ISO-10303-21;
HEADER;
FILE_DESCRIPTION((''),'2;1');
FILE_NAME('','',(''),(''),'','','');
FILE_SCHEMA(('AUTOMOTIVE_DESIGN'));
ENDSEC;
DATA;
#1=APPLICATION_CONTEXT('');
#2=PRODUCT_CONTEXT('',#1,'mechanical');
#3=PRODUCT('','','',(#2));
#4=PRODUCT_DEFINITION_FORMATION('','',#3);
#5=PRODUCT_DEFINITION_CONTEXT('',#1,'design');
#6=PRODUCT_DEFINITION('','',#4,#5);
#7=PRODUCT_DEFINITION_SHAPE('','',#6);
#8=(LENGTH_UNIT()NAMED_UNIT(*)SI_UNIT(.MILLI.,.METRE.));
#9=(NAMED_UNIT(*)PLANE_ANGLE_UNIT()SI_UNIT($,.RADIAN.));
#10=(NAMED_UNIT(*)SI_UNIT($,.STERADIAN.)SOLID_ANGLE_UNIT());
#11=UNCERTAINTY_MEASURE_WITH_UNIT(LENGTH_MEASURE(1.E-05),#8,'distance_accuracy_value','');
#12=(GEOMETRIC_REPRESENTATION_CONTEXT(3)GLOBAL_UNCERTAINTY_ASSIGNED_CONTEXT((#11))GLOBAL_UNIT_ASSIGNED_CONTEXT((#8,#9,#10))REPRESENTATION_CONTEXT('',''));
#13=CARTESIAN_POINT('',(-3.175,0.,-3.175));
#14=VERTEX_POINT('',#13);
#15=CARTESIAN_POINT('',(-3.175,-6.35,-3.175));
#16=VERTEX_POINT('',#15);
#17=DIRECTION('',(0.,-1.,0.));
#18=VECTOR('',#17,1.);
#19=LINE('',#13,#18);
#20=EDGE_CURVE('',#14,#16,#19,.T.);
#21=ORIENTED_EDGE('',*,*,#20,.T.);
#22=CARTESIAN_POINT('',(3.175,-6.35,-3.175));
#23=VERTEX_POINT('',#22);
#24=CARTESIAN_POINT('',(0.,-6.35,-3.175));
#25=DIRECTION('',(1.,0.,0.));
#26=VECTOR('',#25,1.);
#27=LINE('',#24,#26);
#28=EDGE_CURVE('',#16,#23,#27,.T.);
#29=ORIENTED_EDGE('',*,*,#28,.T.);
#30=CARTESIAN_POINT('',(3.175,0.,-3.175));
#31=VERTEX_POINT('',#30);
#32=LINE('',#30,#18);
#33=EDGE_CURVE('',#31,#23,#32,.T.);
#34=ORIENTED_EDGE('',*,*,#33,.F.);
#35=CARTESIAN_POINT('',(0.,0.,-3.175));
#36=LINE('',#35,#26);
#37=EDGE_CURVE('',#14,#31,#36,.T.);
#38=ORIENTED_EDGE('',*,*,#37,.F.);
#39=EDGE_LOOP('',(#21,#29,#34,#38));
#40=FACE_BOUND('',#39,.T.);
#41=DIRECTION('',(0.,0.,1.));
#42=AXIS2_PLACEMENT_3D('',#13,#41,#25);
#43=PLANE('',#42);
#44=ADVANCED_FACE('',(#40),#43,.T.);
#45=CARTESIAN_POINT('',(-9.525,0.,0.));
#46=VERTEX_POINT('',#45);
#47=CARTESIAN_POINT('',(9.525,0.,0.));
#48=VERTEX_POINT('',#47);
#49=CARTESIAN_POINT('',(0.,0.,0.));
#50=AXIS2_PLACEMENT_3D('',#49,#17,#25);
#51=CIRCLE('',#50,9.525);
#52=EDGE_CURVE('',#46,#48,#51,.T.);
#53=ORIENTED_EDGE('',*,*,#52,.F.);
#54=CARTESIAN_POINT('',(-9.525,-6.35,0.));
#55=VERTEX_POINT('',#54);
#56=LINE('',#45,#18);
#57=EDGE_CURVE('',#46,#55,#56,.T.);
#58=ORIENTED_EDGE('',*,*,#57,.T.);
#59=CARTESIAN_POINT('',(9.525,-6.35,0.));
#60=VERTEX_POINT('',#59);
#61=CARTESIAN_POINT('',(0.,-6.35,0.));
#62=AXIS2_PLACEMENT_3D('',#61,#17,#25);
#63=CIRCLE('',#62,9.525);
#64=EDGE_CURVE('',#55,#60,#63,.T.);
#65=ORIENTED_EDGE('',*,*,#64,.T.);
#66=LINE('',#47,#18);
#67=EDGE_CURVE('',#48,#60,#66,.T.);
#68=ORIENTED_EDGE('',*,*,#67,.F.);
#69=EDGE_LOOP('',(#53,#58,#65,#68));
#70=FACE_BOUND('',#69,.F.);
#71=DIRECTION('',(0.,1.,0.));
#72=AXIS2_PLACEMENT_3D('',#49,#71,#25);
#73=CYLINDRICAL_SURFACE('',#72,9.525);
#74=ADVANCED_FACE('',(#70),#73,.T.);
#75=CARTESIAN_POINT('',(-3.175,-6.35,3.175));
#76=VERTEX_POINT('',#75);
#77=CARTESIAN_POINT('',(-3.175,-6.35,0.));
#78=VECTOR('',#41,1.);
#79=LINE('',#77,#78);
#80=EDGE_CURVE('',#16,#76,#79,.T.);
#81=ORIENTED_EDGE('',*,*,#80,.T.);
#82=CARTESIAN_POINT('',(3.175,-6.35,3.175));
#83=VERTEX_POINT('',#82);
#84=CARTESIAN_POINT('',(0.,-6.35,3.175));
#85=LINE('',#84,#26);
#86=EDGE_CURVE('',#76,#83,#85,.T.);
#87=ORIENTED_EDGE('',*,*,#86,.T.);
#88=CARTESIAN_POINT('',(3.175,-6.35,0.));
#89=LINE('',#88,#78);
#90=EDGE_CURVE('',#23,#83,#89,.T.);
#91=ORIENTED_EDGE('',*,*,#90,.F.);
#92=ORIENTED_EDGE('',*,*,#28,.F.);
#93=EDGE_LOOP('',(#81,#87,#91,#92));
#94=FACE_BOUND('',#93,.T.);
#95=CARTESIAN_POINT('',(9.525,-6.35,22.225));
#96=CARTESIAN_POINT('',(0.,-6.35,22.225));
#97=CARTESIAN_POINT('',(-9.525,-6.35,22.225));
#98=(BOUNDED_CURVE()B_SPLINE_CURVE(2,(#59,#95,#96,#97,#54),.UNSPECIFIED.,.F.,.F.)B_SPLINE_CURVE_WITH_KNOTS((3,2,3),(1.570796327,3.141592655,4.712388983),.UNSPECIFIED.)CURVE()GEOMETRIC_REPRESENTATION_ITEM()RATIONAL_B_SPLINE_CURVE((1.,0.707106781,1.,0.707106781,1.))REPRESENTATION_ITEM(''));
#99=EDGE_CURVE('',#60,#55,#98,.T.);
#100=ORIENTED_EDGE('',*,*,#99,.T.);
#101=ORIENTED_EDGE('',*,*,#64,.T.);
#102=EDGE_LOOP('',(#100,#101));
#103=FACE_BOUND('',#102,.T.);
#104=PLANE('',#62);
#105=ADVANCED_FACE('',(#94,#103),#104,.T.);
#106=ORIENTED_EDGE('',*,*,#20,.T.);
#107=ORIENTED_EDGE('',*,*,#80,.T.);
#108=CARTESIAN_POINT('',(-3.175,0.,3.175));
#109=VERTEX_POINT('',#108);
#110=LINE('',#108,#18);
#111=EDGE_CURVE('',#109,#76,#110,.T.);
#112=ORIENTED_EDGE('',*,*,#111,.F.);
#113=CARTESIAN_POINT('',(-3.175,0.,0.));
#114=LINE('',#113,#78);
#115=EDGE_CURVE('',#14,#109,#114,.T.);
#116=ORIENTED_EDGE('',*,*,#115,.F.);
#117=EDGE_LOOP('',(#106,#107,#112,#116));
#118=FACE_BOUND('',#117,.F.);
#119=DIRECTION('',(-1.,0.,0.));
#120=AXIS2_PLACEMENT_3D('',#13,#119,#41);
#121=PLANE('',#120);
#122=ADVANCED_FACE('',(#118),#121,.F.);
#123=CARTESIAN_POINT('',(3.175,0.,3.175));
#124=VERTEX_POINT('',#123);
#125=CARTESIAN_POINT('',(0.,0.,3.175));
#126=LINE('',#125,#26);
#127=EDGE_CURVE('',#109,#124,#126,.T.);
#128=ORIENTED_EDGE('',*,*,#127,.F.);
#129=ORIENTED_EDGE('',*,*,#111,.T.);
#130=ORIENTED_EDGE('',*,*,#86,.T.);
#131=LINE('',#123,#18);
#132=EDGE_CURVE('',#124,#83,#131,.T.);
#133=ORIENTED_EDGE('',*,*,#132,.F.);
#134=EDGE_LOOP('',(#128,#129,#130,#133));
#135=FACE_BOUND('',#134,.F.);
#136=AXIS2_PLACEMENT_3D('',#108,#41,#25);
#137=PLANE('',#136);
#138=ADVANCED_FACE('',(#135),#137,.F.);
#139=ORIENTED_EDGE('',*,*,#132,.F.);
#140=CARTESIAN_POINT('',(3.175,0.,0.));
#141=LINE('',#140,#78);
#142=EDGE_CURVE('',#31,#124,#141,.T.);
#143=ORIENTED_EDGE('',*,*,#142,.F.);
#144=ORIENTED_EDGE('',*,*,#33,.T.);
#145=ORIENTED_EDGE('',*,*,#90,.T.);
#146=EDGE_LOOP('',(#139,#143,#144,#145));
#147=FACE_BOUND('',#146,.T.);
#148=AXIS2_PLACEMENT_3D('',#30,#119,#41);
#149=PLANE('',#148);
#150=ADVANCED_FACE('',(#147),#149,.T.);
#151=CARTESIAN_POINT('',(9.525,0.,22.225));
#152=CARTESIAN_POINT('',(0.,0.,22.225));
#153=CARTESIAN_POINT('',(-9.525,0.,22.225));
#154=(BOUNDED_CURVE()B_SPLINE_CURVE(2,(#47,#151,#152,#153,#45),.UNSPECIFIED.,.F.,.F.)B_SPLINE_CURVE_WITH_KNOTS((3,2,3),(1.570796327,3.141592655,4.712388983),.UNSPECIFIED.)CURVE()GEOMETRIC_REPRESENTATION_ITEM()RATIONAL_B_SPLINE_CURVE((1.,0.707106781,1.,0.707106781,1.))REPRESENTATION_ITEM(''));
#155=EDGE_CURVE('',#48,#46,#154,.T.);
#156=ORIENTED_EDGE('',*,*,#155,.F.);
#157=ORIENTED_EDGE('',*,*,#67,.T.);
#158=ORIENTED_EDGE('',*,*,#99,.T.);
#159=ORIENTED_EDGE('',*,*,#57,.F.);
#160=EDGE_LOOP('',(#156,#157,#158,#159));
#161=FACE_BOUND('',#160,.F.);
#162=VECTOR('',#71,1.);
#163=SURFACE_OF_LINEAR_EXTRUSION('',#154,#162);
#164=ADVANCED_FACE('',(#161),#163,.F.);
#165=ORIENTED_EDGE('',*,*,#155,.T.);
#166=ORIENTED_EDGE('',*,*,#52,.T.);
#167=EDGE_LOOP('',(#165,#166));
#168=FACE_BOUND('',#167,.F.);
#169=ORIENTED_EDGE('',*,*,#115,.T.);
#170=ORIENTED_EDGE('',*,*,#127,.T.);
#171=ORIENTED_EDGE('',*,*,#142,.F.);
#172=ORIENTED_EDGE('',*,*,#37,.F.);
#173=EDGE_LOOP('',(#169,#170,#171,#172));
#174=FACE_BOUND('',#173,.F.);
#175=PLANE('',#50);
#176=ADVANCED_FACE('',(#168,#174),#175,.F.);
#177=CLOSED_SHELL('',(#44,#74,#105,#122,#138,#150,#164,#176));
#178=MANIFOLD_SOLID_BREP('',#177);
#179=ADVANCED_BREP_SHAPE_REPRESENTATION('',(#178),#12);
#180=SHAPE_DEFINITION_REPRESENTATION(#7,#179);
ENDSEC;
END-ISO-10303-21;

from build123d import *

# Parameters (mm, degrees)
F0_W     = 6.35
F0_H     = 6.35
F1_DEPTH = 6.35


with BuildPart() as f1:
    # F0 (on Front) → F1 (new body)
    with BuildSketch(Plane.XZ):
        with BuildLine():
            ThreePointArc((-9.525, -5.16e-08), (2.58e-08, -9.525), (9.525, 0))
            ThreePointArc((9.525, 0), (-2.58e-08, 9.525), (-9.525, -5.16e-08))
        make_face()
        Rectangle(F0_W, F0_H, mode=Mode.SUBTRACT)
        with BuildLine():
            ThreePointArc((-9.525, -5.16e-08), (-2.58e-08, 9.525), (9.525, 0))
            add(Edge.make_bspline(
                [(9.525, 0), (9.525, 22.2250000258), (-1.11e-08, 22.225), (-9.5250000221, 22.2249999742), (-9.525, -5.16e-08)],
                knots=[1.5707963268, 1.5707963268, 1.5707963268, 3.1415926548, 3.1415926548, 4.7123889827, 4.7123889827, 4.7123889827], degree=2, weights=[1, 0.7071067808, 1, 0.7071067808, 1]))
        make_face()
    extrude(amount=F1_DEPTH)


solid = f1.part
